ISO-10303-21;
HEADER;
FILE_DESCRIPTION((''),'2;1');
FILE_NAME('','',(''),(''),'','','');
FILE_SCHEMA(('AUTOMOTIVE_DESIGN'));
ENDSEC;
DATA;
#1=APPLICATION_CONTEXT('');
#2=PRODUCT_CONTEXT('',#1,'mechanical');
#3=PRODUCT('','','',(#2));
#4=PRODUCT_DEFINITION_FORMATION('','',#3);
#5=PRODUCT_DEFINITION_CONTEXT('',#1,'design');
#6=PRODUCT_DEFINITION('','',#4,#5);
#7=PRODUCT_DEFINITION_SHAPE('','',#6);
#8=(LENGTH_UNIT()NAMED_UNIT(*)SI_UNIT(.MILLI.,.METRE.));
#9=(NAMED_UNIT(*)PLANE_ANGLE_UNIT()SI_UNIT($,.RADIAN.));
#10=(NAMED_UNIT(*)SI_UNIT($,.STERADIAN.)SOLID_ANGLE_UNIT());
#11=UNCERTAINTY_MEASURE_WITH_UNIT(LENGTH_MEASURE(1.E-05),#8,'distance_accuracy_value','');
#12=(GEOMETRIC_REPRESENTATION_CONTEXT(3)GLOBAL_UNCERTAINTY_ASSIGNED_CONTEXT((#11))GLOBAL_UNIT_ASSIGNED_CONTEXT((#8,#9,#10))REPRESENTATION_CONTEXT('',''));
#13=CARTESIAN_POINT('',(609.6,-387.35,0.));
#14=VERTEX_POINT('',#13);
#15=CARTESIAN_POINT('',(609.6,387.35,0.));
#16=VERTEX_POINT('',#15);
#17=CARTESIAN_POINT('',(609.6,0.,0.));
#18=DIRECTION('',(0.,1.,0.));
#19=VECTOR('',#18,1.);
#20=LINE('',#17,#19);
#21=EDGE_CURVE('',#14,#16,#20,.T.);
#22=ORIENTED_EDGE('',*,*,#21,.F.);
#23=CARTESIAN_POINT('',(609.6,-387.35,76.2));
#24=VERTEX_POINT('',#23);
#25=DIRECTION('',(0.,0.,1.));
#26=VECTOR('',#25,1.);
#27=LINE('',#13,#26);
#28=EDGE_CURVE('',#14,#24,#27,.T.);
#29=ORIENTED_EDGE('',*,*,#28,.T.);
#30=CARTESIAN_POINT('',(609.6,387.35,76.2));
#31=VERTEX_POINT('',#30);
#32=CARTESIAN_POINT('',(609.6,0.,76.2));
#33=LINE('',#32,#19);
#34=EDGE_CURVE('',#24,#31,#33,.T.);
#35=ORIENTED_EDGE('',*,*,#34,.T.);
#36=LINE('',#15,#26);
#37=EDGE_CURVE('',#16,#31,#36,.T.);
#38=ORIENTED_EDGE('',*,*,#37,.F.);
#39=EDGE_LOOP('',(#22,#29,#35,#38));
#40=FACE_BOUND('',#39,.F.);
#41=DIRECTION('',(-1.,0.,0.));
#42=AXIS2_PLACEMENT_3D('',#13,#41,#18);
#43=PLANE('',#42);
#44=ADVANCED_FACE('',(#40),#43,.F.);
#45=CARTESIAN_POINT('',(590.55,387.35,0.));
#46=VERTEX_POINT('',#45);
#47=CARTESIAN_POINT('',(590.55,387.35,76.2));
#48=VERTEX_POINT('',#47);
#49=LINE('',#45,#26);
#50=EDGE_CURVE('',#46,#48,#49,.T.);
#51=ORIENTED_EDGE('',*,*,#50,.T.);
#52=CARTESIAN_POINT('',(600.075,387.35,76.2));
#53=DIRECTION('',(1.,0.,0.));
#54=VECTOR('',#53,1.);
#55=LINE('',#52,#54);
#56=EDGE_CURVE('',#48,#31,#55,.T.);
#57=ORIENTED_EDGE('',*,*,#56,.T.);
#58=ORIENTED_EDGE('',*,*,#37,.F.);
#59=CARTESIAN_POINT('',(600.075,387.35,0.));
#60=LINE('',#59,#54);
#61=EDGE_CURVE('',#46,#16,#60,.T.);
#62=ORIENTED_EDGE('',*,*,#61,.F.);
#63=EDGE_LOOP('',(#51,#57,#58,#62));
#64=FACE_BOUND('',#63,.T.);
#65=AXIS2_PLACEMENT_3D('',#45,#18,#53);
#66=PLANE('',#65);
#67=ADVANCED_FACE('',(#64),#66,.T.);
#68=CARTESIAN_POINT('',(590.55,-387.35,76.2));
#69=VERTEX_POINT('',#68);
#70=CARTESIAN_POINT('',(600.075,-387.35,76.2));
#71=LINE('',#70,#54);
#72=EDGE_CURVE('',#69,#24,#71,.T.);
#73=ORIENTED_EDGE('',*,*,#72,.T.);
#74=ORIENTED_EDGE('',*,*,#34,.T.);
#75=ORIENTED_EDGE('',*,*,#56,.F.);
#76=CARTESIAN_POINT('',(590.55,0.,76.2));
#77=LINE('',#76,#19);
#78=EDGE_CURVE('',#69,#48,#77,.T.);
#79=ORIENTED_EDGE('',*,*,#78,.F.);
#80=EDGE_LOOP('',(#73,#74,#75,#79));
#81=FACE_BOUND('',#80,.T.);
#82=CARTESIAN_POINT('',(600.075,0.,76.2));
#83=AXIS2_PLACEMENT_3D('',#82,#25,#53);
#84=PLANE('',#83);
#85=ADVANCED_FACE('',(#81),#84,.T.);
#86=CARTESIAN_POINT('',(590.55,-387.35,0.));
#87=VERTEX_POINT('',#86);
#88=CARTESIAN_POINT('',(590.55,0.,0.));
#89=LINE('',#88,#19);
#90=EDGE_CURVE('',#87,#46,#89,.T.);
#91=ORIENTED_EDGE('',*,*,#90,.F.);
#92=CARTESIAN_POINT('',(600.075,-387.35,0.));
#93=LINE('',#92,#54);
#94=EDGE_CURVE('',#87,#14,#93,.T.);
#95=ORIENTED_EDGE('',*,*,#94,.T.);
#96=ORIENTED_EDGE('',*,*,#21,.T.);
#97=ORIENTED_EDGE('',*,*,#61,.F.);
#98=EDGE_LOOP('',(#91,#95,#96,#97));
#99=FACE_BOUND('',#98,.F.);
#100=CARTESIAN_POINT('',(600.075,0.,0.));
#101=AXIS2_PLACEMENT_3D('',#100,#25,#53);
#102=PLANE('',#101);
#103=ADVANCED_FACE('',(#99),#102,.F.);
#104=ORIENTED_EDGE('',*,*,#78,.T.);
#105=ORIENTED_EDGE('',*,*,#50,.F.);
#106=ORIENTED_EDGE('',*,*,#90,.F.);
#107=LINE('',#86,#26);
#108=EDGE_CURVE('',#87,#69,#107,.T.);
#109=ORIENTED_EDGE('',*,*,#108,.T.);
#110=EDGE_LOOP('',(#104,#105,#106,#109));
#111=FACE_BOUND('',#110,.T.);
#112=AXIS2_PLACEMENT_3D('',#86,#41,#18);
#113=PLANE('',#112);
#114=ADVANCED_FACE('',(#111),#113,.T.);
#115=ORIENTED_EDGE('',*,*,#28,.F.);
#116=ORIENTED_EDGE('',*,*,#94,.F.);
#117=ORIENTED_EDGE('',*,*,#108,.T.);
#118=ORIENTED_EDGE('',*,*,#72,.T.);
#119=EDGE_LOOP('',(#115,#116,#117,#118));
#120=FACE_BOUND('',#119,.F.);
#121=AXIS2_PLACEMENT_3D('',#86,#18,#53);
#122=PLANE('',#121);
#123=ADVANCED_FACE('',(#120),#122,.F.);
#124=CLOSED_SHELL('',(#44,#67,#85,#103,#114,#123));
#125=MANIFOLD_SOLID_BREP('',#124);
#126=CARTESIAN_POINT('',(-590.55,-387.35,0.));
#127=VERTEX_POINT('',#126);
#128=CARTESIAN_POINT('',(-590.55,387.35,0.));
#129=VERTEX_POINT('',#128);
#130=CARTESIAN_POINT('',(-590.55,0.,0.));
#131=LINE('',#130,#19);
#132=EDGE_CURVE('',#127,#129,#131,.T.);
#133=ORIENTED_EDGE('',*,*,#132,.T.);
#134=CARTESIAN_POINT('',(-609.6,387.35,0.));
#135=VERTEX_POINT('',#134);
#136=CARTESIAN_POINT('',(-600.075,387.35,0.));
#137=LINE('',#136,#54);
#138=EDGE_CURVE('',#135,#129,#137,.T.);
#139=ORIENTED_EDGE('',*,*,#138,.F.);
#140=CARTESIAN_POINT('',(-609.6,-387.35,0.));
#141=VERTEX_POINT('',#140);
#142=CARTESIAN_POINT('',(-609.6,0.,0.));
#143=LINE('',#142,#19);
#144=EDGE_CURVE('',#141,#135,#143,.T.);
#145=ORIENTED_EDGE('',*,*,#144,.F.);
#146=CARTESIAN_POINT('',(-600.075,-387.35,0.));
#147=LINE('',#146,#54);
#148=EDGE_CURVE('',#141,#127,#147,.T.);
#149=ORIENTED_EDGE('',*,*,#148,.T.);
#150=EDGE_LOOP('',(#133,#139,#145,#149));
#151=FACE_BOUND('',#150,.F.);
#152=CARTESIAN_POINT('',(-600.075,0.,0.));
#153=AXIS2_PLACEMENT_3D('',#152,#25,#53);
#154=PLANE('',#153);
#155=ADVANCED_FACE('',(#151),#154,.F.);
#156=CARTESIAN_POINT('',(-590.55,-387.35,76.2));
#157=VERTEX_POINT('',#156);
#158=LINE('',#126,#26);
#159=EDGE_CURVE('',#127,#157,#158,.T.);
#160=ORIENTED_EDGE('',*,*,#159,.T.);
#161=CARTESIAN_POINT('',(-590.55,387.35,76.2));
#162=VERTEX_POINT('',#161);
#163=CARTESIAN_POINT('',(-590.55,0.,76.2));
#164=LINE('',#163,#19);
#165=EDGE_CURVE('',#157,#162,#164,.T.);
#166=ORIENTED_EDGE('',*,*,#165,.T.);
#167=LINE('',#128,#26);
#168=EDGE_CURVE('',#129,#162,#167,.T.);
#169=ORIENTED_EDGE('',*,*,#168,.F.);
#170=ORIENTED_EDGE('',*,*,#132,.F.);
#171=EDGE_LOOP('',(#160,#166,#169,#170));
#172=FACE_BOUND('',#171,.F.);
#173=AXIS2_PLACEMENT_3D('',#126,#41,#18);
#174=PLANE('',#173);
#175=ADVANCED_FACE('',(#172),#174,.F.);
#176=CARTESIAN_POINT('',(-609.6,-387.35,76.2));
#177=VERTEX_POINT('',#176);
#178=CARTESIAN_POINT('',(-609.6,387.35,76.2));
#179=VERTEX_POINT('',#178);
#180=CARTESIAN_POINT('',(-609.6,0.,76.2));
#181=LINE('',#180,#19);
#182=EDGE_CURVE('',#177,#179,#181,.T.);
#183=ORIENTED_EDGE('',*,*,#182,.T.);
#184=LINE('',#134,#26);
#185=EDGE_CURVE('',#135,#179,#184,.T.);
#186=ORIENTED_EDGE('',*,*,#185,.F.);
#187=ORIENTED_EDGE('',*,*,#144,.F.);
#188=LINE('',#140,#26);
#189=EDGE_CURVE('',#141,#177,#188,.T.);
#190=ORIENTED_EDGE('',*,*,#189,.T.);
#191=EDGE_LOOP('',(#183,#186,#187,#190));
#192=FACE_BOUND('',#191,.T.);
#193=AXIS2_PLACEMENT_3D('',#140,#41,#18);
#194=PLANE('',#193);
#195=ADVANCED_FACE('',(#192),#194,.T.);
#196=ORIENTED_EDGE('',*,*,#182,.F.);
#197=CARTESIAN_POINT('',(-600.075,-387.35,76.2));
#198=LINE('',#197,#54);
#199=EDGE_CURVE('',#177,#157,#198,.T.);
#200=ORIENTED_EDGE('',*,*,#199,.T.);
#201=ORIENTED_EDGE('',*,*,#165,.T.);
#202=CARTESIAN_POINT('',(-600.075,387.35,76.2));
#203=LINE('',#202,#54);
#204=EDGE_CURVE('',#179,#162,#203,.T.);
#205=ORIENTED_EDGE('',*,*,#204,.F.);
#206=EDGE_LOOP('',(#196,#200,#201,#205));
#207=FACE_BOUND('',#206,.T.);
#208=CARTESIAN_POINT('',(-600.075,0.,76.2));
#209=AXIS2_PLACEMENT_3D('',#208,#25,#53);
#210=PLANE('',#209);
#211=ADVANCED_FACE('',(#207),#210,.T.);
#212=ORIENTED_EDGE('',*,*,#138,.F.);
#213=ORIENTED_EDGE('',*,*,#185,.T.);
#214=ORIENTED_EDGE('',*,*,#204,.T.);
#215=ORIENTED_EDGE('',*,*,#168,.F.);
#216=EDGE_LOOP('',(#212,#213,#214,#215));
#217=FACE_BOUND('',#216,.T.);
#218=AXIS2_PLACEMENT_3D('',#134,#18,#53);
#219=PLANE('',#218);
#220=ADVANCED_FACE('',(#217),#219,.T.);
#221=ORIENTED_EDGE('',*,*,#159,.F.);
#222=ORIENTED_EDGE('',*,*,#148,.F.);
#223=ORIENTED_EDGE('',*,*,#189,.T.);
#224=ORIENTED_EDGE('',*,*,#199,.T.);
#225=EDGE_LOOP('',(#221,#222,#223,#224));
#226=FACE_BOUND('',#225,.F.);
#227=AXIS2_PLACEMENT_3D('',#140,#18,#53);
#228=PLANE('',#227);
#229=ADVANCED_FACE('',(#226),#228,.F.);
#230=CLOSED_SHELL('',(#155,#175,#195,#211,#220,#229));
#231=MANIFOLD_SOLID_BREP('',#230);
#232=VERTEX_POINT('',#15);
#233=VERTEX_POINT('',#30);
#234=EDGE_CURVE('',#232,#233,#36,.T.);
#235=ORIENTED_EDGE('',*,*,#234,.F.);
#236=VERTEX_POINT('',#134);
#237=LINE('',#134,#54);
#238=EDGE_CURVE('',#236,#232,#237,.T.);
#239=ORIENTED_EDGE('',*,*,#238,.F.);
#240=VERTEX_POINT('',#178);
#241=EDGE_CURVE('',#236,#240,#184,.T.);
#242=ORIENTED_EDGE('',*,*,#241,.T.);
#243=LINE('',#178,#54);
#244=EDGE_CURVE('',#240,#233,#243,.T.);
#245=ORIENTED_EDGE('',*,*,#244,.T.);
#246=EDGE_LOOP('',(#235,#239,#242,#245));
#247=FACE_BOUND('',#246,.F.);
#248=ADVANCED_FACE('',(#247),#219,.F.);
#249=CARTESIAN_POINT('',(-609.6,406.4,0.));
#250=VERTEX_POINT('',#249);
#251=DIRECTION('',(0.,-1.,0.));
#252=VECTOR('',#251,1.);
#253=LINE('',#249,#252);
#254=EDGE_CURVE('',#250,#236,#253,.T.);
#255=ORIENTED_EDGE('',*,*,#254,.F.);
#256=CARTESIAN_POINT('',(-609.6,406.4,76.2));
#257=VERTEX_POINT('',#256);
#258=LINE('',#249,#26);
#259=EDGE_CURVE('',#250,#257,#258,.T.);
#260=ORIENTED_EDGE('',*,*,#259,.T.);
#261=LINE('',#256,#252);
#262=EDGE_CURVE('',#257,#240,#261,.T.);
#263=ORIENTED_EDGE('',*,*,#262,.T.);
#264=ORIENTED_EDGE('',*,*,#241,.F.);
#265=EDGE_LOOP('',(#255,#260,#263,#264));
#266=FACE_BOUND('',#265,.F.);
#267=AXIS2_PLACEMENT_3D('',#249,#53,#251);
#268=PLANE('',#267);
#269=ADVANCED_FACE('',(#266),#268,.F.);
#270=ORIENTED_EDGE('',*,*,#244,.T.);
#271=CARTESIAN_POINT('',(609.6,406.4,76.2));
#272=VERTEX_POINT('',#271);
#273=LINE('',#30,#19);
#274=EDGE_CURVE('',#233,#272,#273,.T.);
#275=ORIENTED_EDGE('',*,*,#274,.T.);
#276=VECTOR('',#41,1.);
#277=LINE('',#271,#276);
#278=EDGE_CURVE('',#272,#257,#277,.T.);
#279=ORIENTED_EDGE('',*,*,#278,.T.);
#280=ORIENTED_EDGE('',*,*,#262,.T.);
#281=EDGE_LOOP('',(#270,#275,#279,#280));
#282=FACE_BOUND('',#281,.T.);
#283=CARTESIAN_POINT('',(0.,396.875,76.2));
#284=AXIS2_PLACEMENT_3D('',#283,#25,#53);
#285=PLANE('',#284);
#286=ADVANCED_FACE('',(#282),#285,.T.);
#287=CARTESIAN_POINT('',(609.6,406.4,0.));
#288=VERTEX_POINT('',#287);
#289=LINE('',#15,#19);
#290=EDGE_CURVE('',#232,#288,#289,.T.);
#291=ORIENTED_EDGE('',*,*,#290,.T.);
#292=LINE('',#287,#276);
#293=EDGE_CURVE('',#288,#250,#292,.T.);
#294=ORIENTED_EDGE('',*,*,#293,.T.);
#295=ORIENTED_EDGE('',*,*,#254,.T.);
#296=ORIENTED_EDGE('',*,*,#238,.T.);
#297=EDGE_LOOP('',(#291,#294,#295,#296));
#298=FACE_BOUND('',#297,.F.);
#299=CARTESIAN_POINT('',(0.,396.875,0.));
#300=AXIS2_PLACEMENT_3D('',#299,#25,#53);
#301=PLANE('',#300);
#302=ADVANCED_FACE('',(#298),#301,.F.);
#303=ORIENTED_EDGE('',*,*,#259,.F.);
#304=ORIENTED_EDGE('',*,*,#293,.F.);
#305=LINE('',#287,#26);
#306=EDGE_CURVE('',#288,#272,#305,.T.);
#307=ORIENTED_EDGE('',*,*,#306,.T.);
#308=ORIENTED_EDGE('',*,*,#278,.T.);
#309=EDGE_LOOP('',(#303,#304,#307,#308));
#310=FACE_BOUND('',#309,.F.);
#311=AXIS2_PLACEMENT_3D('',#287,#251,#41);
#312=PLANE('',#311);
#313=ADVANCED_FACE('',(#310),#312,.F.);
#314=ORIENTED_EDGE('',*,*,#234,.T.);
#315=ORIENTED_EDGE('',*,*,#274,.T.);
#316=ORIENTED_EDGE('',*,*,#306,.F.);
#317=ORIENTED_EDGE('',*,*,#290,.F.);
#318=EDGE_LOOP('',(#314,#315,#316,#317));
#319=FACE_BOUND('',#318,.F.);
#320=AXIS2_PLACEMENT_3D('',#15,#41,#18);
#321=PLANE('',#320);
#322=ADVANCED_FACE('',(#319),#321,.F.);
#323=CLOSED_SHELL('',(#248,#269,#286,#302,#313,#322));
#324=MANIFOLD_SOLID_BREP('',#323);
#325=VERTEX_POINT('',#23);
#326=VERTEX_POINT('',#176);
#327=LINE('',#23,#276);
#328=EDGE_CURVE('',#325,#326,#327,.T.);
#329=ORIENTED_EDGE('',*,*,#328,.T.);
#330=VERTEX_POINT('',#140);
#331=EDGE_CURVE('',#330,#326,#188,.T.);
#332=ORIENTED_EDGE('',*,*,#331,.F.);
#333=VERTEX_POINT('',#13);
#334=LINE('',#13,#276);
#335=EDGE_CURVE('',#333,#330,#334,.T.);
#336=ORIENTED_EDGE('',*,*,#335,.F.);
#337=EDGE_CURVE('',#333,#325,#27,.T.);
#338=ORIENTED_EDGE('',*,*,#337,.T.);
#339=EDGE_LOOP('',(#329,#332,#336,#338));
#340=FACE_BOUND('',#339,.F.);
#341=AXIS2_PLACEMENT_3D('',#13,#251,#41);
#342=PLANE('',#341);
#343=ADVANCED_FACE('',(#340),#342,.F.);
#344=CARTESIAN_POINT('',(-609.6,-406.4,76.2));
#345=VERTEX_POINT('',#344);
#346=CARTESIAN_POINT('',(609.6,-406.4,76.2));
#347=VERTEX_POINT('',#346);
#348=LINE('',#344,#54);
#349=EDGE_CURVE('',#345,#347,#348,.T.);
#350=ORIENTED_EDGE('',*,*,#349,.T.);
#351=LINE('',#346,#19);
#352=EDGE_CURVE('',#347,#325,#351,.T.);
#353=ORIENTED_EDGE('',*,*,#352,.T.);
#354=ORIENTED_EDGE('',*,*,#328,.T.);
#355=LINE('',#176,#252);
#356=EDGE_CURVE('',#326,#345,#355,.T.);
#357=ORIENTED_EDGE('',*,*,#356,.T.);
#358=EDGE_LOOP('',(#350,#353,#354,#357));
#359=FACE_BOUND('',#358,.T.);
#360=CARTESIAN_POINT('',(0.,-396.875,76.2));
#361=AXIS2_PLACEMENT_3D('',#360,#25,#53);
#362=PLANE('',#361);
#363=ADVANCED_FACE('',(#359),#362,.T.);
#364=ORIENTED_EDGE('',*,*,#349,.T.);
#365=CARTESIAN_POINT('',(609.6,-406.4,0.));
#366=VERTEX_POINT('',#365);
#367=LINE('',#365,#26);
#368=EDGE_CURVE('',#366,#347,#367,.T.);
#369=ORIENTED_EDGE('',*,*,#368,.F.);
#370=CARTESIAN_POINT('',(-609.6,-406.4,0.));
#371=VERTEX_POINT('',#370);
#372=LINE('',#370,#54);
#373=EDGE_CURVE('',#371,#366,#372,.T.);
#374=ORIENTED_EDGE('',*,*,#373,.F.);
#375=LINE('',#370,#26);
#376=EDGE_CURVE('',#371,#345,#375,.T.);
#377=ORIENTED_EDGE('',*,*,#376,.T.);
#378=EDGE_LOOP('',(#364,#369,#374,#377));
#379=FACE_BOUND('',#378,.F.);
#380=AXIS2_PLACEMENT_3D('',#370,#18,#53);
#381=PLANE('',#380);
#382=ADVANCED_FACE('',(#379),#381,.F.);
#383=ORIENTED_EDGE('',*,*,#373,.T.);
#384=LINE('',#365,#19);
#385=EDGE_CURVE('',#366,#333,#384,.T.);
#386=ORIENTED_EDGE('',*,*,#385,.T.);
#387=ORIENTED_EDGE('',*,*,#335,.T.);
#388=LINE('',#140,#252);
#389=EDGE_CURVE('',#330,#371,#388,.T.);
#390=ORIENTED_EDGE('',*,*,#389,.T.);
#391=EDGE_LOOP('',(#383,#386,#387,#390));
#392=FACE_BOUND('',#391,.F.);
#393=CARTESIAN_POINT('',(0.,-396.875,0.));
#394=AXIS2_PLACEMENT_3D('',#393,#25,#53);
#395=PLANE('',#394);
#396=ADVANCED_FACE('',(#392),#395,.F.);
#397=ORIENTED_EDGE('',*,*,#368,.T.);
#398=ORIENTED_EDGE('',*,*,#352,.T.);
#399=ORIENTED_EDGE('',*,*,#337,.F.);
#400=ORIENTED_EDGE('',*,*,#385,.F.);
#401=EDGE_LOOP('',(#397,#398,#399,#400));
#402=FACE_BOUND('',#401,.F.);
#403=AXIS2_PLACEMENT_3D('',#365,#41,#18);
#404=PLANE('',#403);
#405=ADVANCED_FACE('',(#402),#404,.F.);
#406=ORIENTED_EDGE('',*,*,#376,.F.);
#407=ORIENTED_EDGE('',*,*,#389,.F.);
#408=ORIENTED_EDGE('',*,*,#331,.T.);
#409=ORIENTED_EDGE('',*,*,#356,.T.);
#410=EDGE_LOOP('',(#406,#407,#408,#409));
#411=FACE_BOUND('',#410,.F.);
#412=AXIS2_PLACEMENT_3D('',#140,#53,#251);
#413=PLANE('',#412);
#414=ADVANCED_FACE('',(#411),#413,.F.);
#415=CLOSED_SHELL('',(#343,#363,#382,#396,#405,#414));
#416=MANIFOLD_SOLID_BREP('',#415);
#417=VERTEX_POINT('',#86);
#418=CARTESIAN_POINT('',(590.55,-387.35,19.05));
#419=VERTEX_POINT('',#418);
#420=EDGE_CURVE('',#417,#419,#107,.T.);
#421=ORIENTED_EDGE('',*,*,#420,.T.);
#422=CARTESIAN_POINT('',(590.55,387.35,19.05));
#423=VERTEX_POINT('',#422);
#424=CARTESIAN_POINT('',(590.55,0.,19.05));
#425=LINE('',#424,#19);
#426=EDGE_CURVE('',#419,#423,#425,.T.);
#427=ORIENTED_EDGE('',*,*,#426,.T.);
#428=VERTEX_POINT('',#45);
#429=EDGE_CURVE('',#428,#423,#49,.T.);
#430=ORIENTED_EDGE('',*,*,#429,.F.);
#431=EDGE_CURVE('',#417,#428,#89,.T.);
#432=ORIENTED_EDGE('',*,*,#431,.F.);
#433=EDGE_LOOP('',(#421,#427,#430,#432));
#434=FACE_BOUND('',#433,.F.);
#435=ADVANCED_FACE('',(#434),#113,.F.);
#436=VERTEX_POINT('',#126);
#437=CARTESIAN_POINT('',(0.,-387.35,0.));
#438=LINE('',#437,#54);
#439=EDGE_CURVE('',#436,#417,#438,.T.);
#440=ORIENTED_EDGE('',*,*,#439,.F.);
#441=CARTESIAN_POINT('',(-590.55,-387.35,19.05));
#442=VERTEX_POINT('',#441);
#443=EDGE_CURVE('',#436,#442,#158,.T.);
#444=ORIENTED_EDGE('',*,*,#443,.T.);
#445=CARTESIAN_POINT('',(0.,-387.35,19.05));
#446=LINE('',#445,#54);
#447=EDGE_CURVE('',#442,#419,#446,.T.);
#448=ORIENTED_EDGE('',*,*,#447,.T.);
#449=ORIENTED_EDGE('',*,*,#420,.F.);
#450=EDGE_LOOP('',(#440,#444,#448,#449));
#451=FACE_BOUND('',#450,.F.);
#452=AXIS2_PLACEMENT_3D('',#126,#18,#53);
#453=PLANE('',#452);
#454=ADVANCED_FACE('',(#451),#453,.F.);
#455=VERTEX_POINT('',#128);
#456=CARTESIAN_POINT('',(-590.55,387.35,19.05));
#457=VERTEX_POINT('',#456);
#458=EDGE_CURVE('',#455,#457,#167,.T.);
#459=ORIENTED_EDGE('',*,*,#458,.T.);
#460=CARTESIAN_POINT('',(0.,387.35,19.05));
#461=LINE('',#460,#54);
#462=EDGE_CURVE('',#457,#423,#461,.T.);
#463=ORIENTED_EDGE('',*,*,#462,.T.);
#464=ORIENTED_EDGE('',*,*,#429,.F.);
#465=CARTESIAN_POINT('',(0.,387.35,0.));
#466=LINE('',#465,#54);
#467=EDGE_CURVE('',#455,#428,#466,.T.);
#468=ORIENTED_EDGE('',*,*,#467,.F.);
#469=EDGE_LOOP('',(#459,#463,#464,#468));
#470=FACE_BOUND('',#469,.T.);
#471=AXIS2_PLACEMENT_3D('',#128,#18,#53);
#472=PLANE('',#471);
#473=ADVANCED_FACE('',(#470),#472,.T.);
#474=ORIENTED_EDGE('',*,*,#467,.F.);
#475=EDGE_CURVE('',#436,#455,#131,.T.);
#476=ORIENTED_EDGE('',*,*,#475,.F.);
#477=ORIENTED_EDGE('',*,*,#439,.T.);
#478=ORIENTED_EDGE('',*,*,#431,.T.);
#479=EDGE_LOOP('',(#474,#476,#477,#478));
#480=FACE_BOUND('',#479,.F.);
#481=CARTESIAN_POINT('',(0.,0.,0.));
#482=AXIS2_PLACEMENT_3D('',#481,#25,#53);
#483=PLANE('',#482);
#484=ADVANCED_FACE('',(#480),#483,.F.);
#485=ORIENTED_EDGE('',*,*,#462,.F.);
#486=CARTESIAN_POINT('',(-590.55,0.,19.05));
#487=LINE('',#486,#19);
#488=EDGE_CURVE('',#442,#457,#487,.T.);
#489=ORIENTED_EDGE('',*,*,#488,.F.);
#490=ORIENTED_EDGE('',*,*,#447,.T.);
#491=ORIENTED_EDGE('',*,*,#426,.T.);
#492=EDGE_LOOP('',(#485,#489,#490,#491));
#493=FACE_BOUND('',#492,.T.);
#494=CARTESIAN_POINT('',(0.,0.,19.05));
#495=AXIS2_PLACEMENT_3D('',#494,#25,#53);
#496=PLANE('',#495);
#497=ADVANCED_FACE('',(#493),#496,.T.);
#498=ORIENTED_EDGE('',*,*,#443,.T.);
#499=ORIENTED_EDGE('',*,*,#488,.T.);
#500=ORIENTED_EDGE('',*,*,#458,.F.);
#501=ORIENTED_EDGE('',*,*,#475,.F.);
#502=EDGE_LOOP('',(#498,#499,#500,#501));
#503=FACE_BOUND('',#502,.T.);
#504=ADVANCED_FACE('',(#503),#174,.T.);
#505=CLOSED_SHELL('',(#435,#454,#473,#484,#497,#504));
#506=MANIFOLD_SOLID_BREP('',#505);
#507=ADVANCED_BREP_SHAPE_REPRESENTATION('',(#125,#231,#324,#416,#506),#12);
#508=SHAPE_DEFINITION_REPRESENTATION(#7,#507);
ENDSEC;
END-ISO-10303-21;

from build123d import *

# Parameters (mm, degrees)
F2_W     = 1181.1
F2_H     = 774.7
F3_DEPTH = 19.05
F5_DEPTH = 76.2
F7_W     = 19.05
F7_H     = 774.7
F8_DEPTH = 76.2


with BuildPart() as f3:
    # F2 (on Top) → F3 (new body, through all)
    with BuildSketch(Plane.XY):
        Rectangle(F2_W, F2_H)
    extrude(amount=F3_DEPTH)


with BuildPart() as f5:
    # F4 (on Top) → F5 (new body, through all)
    with BuildSketch(Plane.XY):
        Polygon((590.55, -387.35), (-590.55, -387.35), (-609.6, -387.35), (-609.6, -406.4), (609.6, -406.4), (609.6, -387.35), align=None)
    extrude(amount=F5_DEPTH)


with BuildPart() as f5b:
    # F4 (on Top) → F5, piece 2 (new body, through all)
    with BuildSketch(Plane.XY):
        Polygon((-609.6, 406.4), (-609.6, 387.35), (-590.55, 387.35), (590.55, 387.35), (609.6, 387.35), (609.6, 406.4), align=None)
    extrude(amount=F5_DEPTH)


with BuildPart() as f8:
    # F7 (on Top) → F8 (new body, through all)
    with BuildSketch(Plane.XY):
        with Locations((600.075, 0)):
            Rectangle(F7_W, F7_H)
    extrude(amount=F8_DEPTH)


with BuildPart() as f8b:
    # F7 (on Top) → F8, piece 2 (new body, through all)
    with BuildSketch(Plane.XY):
        with Locations((-600.075, 0)):
            Rectangle(F7_W, F7_H)
    extrude(amount=F8_DEPTH)


solid = Compound([f3.part, f5.part, f5b.part, f8.part, f8b.part])
